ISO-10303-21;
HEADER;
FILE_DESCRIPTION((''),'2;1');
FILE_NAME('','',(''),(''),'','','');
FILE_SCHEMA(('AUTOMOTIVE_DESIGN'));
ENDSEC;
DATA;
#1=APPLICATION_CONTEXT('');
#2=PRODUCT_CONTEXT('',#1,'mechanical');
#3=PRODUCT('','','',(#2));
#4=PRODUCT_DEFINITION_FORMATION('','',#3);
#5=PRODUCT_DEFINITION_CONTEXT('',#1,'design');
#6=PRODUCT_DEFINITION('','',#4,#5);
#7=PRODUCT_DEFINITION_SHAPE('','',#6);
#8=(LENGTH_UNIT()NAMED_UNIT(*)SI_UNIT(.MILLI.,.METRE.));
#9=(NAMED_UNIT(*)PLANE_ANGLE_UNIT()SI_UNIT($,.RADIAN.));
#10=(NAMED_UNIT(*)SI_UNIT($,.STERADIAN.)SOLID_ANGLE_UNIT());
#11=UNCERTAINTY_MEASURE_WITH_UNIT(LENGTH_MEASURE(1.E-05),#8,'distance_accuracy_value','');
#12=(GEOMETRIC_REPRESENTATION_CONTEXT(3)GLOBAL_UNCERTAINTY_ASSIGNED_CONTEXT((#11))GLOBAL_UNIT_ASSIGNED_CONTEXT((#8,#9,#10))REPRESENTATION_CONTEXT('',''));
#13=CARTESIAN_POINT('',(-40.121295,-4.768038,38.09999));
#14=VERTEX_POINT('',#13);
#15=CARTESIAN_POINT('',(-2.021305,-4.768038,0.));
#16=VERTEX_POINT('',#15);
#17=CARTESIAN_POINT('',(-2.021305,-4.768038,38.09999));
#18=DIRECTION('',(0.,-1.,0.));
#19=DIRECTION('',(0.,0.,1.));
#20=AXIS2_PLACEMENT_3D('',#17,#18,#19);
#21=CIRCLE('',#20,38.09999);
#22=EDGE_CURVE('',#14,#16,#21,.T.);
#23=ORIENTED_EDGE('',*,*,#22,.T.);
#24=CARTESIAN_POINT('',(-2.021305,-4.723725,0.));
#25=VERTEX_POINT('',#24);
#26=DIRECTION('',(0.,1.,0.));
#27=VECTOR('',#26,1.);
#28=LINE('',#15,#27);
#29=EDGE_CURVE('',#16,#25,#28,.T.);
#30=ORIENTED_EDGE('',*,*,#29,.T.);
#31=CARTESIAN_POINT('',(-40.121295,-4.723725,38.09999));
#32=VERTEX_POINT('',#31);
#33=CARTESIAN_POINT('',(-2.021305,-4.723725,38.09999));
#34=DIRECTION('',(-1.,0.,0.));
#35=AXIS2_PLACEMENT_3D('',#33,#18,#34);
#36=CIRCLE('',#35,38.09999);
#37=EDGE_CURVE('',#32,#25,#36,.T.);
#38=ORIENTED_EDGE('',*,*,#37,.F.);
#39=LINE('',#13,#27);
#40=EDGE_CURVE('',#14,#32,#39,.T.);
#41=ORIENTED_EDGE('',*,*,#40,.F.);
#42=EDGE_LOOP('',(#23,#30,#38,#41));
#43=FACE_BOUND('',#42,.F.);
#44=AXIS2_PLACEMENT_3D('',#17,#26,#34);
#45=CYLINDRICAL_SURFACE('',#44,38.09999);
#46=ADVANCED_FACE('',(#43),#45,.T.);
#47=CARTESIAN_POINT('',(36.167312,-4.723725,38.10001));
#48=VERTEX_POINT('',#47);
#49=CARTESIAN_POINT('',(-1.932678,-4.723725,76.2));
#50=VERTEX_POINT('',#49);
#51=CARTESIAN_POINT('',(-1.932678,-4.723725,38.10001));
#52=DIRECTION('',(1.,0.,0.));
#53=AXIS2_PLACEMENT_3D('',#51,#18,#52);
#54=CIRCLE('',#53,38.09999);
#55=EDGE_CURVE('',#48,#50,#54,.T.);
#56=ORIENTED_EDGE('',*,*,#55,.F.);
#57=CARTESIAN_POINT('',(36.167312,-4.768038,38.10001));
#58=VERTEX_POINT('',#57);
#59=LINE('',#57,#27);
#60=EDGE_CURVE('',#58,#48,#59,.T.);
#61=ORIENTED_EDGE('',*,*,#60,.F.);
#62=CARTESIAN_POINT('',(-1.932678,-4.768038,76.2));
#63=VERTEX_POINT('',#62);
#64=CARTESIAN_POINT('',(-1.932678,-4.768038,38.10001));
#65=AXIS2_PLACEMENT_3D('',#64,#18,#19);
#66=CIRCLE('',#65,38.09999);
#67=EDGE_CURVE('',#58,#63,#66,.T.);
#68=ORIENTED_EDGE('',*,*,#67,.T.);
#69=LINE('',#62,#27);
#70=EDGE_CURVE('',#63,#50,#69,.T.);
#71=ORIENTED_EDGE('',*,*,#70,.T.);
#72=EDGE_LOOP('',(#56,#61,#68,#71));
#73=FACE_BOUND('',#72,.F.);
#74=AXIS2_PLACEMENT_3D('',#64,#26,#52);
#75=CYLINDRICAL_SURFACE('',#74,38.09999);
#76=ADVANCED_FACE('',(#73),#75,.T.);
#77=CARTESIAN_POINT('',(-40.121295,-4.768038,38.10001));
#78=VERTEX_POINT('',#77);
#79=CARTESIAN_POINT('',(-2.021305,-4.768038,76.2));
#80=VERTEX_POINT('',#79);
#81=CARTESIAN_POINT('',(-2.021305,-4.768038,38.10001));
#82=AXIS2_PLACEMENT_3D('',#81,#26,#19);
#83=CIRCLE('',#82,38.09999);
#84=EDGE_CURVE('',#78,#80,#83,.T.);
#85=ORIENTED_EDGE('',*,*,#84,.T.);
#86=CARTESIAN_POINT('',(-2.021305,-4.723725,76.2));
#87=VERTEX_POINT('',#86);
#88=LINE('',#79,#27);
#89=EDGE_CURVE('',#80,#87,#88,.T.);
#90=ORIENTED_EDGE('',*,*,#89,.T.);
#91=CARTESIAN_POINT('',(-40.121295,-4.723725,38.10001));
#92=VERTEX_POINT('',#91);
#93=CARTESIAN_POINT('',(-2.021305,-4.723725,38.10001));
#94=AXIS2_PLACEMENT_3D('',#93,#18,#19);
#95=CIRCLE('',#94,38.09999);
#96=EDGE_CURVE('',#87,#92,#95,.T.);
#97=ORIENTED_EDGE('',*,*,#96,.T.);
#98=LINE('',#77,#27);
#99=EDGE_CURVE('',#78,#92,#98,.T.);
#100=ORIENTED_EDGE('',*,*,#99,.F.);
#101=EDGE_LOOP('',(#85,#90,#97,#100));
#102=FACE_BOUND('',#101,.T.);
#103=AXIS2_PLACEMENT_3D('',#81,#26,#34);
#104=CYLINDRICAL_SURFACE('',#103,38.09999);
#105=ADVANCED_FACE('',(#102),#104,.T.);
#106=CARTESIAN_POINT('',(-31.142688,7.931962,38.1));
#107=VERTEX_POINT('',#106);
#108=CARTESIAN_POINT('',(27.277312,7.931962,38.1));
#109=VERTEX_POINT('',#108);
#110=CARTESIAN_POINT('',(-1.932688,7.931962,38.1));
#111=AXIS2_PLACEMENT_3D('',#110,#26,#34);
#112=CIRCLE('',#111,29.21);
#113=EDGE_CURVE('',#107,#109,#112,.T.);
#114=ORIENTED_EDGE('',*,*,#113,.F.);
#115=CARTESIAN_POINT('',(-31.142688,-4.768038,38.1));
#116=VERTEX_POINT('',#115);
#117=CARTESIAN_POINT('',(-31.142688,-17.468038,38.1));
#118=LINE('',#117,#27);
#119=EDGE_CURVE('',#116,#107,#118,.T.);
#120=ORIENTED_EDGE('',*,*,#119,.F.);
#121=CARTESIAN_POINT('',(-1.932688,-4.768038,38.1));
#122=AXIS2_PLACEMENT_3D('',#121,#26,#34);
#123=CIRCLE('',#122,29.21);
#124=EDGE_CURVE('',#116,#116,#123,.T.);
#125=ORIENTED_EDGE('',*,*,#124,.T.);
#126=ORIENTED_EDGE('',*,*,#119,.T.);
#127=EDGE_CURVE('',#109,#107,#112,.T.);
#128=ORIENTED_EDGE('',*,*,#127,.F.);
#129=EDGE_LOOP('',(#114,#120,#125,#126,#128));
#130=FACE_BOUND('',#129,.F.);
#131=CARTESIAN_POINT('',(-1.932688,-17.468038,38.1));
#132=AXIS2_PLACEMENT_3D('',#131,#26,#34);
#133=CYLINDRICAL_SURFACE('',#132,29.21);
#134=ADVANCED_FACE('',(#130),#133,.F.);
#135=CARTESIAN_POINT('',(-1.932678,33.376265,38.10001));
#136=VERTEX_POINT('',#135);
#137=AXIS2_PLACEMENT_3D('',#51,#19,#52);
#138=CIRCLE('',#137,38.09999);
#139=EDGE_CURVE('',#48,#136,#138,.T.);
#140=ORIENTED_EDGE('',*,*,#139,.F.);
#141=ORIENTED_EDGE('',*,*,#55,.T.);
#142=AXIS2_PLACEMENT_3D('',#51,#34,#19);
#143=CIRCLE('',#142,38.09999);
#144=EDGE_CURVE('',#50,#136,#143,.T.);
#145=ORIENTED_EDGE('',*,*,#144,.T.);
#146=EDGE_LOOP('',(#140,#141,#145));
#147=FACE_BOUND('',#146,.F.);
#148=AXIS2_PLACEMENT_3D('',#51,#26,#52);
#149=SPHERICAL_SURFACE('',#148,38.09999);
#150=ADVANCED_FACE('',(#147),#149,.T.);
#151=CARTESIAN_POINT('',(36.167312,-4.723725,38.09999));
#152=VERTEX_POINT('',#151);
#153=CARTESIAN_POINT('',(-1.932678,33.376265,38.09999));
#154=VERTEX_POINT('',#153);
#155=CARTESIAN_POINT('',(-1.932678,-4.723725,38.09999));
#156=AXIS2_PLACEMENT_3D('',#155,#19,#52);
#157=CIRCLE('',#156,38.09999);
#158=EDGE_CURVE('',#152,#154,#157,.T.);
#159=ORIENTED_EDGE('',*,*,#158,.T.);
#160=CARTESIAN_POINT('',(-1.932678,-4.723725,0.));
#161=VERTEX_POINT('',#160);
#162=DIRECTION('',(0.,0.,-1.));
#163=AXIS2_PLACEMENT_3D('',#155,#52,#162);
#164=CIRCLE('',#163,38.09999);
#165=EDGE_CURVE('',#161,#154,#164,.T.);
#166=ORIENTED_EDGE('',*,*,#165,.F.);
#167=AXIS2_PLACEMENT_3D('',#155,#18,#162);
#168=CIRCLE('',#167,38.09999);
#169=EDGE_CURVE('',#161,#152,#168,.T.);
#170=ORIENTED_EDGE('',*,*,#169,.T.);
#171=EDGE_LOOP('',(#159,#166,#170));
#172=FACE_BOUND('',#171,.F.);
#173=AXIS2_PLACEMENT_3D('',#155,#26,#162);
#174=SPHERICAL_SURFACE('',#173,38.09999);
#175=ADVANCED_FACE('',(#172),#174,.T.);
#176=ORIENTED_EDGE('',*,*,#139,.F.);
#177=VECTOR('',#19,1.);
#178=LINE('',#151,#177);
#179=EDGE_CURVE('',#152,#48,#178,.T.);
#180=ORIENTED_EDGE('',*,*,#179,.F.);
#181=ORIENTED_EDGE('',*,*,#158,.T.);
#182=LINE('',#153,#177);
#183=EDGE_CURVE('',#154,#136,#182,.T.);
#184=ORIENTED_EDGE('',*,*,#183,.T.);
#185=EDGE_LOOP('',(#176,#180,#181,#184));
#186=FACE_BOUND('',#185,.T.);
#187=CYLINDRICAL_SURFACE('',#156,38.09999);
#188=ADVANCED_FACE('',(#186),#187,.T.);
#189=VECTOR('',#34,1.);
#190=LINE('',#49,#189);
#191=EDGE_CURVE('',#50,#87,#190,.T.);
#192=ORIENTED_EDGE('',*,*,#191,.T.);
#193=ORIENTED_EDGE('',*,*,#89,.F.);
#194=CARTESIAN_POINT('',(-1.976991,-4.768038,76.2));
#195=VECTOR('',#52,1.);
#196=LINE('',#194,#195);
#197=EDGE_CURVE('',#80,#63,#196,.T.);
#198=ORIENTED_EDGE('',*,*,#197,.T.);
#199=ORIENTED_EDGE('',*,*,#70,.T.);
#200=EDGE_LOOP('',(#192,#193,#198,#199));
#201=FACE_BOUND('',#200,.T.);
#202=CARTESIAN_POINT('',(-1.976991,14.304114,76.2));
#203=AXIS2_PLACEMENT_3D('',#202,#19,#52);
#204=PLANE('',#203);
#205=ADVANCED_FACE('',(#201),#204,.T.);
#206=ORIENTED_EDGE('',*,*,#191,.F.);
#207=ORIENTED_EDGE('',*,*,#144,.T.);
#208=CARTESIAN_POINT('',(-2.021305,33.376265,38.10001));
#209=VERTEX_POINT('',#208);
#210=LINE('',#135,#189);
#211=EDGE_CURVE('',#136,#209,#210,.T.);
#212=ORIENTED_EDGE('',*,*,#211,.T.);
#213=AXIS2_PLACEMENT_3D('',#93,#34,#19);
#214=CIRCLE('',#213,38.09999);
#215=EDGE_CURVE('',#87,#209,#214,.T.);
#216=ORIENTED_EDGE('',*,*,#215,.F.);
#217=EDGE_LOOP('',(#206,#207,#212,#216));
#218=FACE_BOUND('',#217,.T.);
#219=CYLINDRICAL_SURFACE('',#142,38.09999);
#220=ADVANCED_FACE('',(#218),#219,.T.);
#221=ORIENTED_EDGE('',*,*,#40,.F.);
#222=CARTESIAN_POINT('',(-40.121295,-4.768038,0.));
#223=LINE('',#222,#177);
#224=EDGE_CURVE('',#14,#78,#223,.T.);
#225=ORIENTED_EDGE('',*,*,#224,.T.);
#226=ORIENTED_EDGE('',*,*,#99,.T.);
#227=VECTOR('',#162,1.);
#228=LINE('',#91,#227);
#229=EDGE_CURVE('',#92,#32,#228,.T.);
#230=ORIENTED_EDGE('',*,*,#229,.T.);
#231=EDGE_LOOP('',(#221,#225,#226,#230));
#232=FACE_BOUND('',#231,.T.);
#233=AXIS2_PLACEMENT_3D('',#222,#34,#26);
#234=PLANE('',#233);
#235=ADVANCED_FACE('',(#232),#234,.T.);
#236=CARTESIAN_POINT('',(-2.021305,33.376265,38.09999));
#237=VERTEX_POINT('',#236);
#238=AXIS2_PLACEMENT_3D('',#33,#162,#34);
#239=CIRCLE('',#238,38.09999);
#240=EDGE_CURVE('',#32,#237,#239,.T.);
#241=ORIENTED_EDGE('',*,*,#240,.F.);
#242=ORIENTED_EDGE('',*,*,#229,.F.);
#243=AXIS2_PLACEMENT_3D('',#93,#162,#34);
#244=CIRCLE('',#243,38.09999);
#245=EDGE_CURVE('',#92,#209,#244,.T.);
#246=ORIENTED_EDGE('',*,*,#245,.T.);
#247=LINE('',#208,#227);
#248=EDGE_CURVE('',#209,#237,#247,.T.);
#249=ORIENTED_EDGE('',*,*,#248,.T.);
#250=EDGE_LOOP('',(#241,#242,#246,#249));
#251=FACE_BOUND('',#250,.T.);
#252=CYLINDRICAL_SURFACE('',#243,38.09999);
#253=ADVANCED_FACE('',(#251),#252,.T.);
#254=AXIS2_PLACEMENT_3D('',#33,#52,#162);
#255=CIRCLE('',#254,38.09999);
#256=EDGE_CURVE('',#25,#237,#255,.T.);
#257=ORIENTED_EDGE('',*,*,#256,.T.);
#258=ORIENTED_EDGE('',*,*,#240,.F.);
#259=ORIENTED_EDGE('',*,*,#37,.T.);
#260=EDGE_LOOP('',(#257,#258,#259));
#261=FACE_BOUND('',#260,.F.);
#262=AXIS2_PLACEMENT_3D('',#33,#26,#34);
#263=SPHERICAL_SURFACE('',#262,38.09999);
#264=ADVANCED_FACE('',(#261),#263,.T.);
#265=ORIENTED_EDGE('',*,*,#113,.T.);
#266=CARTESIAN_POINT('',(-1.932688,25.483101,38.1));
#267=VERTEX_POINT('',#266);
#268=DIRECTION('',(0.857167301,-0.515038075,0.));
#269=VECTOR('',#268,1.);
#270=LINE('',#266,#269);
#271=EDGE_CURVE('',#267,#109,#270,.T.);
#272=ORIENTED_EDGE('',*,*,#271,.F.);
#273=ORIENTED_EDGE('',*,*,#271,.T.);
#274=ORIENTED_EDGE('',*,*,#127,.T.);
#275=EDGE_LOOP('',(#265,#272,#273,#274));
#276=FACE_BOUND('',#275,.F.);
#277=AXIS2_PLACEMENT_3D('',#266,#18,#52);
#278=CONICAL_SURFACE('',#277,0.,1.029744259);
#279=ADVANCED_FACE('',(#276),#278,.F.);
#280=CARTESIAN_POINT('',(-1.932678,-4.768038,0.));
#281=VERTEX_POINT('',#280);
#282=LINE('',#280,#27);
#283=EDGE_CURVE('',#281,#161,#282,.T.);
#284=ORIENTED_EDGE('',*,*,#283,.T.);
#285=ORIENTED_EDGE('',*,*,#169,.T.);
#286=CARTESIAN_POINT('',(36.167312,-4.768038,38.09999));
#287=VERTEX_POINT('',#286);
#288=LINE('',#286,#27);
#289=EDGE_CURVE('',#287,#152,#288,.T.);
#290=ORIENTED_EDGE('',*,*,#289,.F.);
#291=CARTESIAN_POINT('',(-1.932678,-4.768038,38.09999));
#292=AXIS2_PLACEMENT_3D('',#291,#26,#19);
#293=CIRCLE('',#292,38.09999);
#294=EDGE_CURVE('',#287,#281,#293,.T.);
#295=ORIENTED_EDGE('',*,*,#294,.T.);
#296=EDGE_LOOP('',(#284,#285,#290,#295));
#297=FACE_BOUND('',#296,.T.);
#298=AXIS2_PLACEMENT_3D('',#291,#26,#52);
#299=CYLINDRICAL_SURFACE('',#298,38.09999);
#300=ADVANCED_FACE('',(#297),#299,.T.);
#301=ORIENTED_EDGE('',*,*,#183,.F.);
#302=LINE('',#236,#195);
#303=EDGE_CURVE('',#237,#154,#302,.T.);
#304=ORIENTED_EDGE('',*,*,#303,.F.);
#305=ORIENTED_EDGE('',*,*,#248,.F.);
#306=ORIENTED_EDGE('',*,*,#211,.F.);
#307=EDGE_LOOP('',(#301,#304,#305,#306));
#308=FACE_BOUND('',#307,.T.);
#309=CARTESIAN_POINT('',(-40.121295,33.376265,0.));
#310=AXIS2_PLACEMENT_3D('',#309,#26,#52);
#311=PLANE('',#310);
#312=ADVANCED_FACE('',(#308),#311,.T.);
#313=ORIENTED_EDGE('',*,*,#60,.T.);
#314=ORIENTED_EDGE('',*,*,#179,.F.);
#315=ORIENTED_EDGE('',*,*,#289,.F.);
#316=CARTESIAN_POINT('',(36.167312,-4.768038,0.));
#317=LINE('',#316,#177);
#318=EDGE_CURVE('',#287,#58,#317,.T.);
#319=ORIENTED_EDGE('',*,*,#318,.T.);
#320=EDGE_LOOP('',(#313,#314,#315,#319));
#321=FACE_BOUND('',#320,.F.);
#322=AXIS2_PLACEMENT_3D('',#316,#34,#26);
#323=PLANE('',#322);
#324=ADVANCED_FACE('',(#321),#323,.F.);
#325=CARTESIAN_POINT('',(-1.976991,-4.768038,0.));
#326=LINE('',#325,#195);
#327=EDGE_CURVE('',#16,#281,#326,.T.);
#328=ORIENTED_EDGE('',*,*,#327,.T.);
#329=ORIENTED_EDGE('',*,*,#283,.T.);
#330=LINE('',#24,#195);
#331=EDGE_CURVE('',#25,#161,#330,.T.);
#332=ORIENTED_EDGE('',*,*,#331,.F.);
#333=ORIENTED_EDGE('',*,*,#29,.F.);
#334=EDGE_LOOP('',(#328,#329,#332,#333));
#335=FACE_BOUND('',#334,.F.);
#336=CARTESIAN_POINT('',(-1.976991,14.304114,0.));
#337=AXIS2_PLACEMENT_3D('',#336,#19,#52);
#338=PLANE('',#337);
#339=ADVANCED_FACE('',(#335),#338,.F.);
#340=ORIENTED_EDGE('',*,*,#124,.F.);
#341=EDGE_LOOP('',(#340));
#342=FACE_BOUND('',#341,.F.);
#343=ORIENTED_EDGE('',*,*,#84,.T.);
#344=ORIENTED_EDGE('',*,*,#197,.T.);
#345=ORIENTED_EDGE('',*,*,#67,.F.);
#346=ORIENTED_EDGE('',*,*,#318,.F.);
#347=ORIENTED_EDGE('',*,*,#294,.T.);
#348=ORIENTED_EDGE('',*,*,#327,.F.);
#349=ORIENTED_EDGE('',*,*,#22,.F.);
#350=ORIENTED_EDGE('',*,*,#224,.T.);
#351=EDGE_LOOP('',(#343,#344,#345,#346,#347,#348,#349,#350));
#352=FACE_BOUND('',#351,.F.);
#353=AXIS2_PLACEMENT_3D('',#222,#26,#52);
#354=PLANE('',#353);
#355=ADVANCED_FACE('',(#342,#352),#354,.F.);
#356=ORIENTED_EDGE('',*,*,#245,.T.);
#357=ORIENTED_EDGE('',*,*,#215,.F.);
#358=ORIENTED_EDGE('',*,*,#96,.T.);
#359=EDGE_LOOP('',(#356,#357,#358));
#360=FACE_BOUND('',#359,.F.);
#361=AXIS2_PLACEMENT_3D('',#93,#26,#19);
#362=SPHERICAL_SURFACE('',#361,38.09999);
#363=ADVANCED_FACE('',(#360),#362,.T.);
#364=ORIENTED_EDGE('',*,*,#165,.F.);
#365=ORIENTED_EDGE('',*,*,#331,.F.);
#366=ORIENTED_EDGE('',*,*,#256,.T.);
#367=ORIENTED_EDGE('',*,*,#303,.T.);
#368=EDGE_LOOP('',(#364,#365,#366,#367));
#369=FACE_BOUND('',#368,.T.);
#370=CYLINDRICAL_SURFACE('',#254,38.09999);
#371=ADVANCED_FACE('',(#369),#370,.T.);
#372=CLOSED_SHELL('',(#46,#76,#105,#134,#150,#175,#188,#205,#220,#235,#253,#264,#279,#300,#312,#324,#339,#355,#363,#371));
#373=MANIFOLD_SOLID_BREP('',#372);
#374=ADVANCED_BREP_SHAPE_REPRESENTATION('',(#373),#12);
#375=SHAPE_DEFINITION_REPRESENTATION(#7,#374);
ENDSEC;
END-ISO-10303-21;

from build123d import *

# Parameters (mm, degrees)
F0_W     = 76.2886069715
F0_H     = 38.1443030201
F1_DEPTH = 76.2
F2_R     = 38.09999
F4_R     = 38.09999
F5_D     = 58.42
F5_DEPTH = 12.7
F5_TIP   = 17.5511386818


# Not quite as in the source:
# - a fillet or chamfer is up to 0.001 mm smaller than in the source, because OpenCascade refuses the exact size


with BuildPart() as f1:
    # F0 (on Top) → F1 (new body)
    with BuildSketch(Plane.XY):
        with Locations((-1.9769910723, 14.3041138072)):
            Rectangle(F0_W, F0_H)
    extrude(amount=F1_DEPTH)

    # F2 (radius 38.1 in the source; OpenCascade refuses exactly that, so slightly less here)
    f2_edges = [f1.edges().sort_by_distance(p)[0] for p in [
        (-40.121295, 14.304114, 76.2),
        (-40.121295, 14.304114, 0),
        (36.167312, 14.304114, 0),
        (36.167312, 14.304114, 76.2),
    ]]
    fillet(f2_edges, radius=F2_R)

    # F4 (radius 38.1 in the source; OpenCascade refuses exactly that, so slightly less here)
    f4_edges = [f1.edges().sort_by_distance(p)[0] for p in [
        (-28.962066, 33.376265, 11.159229),
        (25.008084, 33.376265, 11.159229),
    ]]
    fillet(f4_edges, radius=F4_R)

    # F5
    with Locations(Plane.XZ.offset(4.7680377029)):
        with Locations((-1.9326875865, 38.1)):
            Hole(F5_D / 2, depth=F5_DEPTH)
            with Locations((0, 0, -(F5_DEPTH + F5_TIP / 2))):  # 118° drill point
                Cone(0, F5_D / 2, F5_TIP, mode=Mode.SUBTRACT)


solid = f1.part
